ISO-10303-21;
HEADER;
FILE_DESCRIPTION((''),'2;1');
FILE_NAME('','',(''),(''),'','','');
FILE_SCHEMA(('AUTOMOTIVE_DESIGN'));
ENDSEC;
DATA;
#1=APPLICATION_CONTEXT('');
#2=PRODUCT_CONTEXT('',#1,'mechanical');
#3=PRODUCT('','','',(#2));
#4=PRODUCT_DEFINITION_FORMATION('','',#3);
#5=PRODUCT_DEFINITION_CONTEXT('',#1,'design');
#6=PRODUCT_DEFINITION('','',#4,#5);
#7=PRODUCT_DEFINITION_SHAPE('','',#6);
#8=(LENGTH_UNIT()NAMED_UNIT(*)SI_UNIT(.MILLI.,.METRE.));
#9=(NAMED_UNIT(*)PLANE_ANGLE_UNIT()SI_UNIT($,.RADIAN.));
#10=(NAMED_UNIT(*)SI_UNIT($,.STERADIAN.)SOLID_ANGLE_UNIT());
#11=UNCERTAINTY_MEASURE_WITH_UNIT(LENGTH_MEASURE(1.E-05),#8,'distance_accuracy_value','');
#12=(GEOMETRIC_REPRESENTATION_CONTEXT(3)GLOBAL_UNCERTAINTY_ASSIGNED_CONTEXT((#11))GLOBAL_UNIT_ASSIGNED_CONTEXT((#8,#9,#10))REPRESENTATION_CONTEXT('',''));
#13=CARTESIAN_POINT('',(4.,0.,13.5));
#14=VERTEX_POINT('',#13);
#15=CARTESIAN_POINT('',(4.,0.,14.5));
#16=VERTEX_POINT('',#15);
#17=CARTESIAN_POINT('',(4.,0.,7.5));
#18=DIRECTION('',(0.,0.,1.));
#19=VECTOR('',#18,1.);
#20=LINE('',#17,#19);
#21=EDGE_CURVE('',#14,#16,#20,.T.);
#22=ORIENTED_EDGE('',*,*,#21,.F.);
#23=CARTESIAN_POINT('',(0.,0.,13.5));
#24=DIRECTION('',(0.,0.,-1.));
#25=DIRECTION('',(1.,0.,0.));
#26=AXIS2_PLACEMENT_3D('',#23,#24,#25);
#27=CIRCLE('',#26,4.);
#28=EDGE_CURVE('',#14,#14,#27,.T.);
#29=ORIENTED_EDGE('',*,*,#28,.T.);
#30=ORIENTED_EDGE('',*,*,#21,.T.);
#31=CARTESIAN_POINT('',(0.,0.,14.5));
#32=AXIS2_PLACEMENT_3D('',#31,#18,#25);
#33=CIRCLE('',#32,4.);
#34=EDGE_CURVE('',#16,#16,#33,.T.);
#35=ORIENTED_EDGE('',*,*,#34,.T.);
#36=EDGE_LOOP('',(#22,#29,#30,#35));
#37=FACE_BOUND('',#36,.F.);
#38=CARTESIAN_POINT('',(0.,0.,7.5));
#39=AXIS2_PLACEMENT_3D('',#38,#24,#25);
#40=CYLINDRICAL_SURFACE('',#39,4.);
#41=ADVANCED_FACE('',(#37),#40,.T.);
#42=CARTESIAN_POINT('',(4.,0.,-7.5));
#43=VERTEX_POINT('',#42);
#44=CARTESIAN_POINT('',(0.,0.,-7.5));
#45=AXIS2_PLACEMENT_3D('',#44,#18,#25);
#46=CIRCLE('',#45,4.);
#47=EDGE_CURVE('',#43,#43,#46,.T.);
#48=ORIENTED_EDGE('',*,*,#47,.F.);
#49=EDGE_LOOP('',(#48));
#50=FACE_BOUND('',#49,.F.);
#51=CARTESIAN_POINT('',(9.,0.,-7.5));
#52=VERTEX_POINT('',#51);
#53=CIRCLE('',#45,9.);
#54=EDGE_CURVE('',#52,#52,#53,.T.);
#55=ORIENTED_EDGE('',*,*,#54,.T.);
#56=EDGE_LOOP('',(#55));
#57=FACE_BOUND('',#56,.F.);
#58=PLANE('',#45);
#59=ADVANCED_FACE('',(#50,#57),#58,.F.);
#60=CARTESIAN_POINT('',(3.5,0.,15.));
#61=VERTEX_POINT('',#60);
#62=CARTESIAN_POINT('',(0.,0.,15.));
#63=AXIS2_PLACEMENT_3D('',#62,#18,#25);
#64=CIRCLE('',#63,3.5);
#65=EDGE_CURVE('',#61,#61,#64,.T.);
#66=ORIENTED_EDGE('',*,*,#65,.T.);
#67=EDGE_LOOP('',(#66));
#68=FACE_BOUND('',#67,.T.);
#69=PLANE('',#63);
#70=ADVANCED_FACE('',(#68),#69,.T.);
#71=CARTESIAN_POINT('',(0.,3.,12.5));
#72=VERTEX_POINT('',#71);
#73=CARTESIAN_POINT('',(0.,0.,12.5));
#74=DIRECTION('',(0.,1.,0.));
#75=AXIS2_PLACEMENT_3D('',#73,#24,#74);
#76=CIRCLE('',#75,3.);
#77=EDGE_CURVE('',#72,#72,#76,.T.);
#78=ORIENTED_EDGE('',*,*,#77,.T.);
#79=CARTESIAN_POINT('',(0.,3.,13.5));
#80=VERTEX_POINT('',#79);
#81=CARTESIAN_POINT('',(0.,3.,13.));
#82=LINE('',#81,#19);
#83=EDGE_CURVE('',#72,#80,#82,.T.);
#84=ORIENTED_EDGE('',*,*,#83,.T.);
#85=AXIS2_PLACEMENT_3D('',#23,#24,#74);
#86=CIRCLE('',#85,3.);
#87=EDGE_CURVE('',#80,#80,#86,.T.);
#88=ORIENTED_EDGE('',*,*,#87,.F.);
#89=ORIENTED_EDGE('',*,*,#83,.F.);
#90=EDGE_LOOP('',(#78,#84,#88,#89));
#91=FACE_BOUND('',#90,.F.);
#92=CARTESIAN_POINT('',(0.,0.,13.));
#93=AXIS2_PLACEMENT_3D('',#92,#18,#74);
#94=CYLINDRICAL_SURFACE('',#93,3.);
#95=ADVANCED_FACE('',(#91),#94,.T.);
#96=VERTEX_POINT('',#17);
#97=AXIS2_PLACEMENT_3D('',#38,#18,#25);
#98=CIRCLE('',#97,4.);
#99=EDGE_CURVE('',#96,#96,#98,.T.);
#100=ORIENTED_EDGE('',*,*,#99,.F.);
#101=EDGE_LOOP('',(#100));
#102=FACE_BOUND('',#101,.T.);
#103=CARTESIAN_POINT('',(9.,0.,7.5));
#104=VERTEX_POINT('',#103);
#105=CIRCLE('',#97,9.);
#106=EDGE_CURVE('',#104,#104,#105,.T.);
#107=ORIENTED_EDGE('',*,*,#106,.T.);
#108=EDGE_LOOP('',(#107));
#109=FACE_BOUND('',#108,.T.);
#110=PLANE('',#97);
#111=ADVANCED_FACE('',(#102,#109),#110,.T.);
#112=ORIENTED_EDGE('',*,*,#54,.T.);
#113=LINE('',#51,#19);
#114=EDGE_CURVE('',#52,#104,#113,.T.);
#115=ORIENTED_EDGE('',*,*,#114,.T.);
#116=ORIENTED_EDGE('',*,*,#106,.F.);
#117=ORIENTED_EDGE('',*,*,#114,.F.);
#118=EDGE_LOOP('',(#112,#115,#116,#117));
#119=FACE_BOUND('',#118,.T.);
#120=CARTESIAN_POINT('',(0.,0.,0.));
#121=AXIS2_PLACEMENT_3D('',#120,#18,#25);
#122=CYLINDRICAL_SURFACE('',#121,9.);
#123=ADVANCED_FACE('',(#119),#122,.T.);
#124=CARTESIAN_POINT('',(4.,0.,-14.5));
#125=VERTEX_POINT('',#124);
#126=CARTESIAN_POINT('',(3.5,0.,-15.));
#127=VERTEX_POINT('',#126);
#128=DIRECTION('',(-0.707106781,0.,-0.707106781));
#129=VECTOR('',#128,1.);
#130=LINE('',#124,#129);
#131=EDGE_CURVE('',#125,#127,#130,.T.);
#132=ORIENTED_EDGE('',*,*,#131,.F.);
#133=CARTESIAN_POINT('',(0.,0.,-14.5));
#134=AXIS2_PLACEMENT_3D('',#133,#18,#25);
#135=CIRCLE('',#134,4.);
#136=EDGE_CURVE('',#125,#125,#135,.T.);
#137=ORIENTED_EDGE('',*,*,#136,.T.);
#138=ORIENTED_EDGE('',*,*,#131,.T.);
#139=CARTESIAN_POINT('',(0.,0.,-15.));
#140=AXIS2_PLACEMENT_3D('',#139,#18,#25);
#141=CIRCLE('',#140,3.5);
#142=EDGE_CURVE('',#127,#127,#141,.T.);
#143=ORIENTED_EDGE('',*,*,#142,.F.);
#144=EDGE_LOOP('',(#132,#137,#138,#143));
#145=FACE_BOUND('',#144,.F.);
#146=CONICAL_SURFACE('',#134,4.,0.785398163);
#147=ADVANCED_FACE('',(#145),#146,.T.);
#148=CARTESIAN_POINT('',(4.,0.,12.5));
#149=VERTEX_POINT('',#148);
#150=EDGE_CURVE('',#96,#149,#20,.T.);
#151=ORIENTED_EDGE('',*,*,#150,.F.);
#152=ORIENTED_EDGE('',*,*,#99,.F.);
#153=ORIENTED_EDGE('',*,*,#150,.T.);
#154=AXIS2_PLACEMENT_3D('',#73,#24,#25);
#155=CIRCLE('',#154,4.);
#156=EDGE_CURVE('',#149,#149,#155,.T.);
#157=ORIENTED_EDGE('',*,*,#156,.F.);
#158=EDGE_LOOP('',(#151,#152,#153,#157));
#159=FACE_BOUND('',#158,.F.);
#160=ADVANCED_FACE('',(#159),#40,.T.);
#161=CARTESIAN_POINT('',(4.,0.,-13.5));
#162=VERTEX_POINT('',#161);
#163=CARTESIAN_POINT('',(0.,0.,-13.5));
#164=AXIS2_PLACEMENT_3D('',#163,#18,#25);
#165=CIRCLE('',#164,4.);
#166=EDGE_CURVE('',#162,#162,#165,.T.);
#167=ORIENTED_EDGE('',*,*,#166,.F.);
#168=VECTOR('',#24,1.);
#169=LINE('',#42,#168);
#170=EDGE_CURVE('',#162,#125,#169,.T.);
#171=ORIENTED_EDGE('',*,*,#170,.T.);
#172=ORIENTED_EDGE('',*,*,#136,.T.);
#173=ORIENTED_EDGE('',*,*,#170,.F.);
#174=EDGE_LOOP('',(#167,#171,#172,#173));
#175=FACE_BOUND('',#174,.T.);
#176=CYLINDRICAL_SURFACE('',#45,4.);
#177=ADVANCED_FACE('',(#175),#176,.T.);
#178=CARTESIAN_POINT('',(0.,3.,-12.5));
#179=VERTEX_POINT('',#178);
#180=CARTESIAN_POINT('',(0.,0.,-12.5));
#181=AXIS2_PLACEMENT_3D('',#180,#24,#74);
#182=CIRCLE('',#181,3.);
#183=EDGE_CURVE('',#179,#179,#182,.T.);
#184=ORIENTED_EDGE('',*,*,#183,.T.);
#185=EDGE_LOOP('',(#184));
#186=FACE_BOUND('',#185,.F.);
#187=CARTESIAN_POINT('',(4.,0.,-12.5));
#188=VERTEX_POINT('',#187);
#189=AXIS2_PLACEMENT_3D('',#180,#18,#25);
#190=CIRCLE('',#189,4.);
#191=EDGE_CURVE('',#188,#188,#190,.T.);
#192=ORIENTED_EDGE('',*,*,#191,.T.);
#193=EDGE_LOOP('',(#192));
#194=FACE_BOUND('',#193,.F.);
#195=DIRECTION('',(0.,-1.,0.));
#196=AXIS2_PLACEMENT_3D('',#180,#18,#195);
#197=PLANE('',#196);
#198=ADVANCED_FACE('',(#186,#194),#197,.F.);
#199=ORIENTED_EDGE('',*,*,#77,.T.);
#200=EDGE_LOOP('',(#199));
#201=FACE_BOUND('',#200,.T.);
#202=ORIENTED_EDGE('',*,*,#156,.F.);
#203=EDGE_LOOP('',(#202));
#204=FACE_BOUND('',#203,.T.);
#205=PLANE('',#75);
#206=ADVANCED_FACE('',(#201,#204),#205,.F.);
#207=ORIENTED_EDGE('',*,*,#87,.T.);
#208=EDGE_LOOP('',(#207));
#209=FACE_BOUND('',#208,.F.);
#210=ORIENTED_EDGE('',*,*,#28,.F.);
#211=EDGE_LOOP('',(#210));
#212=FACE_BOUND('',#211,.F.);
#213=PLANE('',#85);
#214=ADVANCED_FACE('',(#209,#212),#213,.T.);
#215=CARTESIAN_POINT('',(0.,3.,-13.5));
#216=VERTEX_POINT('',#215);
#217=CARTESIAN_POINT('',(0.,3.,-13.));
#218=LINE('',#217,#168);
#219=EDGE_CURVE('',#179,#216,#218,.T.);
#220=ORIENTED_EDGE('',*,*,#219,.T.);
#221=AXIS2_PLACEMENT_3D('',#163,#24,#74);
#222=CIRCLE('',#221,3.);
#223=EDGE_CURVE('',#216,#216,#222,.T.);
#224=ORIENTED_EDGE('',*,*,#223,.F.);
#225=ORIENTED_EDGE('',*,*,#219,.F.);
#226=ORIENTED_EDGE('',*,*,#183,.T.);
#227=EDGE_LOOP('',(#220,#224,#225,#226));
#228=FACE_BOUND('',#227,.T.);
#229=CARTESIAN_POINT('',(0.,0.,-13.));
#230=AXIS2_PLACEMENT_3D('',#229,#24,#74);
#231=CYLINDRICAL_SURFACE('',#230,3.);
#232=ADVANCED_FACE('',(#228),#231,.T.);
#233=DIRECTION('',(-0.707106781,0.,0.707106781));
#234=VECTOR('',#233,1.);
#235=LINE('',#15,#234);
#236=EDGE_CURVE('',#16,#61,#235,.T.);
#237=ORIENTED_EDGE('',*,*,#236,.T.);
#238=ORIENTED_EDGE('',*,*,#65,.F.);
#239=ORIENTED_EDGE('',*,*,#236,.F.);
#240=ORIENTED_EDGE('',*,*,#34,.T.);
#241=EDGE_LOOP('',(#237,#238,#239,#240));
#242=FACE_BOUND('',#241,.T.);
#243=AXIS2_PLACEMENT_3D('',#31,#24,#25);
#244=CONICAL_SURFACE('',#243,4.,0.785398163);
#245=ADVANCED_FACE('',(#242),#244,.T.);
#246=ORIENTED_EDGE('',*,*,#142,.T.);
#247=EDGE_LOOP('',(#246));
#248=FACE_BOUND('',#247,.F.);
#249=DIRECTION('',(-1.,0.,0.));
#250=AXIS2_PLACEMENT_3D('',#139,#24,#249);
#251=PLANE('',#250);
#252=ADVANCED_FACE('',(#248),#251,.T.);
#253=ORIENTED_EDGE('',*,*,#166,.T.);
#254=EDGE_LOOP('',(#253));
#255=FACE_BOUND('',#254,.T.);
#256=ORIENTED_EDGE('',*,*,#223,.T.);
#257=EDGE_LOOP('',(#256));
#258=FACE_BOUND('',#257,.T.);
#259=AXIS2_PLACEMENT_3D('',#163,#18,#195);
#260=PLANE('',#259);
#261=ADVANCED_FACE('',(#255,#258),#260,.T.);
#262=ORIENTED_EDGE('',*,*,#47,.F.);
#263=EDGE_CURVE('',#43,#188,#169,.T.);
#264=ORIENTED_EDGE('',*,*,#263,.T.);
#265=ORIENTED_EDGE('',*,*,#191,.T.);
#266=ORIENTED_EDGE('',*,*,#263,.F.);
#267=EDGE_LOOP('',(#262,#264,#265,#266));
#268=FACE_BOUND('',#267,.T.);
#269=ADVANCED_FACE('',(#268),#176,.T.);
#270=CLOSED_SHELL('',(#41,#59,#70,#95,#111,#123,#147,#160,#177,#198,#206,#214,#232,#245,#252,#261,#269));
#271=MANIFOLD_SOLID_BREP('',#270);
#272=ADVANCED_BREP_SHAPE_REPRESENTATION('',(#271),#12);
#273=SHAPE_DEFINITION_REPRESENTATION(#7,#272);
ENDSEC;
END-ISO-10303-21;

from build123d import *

# Parameters (mm, degrees)
F0_R     = 9
F1_DEPTH = 7.5
F2_R     = 4
F3_DEPTH = 7.5
F4_SIZE2 = 0.5
F4_SIZE  = 0.5
F5_W     = 1
F5_H     = 1


# Not quite as in the source:
# - a feature of the source that left no trace in its solid (it failed there, or was rolled back) is left out
# - a pattern or mirror of a feature is missing from the dataset's text; its kind, count and spacing are read off the source's solid


with BuildPart() as f1:
    # F0 (on Top) → F1 (new body, symmetric)
    with BuildSketch(Plane.XY):
        Circle(F0_R)
    extrude(amount=F1_DEPTH, both=True)

    # F2 (on face) → F3 (join)
    with BuildSketch(Plane.XY.offset(7.5)):
        Circle(F2_R)
    f3 = extrude(amount=F3_DEPTH)

    # F3_copies: F3 across plane
    add(f3.mirror(Plane(origin=(0, 0, 0), x_dir=(-1, 0, 0), z_dir=(0, 0, -1))))

    # F4
    f4_edges = [f1.edges().sort_by_distance(p)[0] for p in [
        (-4, 0, 15),
        (-4, 0, -15),
    ]]
    chamfer(f4_edges, length=F4_SIZE, length2=F4_SIZE2)

    # F5 (on Right) → F6 (revolve, cut)
    with BuildSketch(Plane.YZ):
        with Locations((3.5, 13)):
            Rectangle(F5_W, F5_H)
    f6 = revolve(axis=Axis((0, 0, 7.5), (0, 0, -1)), mode=Mode.SUBTRACT)

    # F6_copies: F6 across plane
    add(f6.mirror(Plane(origin=(0, 0, 0), x_dir=(-1, 0, 0), z_dir=(0, 0, -1))), mode=Mode.SUBTRACT)


solid = f1.part
